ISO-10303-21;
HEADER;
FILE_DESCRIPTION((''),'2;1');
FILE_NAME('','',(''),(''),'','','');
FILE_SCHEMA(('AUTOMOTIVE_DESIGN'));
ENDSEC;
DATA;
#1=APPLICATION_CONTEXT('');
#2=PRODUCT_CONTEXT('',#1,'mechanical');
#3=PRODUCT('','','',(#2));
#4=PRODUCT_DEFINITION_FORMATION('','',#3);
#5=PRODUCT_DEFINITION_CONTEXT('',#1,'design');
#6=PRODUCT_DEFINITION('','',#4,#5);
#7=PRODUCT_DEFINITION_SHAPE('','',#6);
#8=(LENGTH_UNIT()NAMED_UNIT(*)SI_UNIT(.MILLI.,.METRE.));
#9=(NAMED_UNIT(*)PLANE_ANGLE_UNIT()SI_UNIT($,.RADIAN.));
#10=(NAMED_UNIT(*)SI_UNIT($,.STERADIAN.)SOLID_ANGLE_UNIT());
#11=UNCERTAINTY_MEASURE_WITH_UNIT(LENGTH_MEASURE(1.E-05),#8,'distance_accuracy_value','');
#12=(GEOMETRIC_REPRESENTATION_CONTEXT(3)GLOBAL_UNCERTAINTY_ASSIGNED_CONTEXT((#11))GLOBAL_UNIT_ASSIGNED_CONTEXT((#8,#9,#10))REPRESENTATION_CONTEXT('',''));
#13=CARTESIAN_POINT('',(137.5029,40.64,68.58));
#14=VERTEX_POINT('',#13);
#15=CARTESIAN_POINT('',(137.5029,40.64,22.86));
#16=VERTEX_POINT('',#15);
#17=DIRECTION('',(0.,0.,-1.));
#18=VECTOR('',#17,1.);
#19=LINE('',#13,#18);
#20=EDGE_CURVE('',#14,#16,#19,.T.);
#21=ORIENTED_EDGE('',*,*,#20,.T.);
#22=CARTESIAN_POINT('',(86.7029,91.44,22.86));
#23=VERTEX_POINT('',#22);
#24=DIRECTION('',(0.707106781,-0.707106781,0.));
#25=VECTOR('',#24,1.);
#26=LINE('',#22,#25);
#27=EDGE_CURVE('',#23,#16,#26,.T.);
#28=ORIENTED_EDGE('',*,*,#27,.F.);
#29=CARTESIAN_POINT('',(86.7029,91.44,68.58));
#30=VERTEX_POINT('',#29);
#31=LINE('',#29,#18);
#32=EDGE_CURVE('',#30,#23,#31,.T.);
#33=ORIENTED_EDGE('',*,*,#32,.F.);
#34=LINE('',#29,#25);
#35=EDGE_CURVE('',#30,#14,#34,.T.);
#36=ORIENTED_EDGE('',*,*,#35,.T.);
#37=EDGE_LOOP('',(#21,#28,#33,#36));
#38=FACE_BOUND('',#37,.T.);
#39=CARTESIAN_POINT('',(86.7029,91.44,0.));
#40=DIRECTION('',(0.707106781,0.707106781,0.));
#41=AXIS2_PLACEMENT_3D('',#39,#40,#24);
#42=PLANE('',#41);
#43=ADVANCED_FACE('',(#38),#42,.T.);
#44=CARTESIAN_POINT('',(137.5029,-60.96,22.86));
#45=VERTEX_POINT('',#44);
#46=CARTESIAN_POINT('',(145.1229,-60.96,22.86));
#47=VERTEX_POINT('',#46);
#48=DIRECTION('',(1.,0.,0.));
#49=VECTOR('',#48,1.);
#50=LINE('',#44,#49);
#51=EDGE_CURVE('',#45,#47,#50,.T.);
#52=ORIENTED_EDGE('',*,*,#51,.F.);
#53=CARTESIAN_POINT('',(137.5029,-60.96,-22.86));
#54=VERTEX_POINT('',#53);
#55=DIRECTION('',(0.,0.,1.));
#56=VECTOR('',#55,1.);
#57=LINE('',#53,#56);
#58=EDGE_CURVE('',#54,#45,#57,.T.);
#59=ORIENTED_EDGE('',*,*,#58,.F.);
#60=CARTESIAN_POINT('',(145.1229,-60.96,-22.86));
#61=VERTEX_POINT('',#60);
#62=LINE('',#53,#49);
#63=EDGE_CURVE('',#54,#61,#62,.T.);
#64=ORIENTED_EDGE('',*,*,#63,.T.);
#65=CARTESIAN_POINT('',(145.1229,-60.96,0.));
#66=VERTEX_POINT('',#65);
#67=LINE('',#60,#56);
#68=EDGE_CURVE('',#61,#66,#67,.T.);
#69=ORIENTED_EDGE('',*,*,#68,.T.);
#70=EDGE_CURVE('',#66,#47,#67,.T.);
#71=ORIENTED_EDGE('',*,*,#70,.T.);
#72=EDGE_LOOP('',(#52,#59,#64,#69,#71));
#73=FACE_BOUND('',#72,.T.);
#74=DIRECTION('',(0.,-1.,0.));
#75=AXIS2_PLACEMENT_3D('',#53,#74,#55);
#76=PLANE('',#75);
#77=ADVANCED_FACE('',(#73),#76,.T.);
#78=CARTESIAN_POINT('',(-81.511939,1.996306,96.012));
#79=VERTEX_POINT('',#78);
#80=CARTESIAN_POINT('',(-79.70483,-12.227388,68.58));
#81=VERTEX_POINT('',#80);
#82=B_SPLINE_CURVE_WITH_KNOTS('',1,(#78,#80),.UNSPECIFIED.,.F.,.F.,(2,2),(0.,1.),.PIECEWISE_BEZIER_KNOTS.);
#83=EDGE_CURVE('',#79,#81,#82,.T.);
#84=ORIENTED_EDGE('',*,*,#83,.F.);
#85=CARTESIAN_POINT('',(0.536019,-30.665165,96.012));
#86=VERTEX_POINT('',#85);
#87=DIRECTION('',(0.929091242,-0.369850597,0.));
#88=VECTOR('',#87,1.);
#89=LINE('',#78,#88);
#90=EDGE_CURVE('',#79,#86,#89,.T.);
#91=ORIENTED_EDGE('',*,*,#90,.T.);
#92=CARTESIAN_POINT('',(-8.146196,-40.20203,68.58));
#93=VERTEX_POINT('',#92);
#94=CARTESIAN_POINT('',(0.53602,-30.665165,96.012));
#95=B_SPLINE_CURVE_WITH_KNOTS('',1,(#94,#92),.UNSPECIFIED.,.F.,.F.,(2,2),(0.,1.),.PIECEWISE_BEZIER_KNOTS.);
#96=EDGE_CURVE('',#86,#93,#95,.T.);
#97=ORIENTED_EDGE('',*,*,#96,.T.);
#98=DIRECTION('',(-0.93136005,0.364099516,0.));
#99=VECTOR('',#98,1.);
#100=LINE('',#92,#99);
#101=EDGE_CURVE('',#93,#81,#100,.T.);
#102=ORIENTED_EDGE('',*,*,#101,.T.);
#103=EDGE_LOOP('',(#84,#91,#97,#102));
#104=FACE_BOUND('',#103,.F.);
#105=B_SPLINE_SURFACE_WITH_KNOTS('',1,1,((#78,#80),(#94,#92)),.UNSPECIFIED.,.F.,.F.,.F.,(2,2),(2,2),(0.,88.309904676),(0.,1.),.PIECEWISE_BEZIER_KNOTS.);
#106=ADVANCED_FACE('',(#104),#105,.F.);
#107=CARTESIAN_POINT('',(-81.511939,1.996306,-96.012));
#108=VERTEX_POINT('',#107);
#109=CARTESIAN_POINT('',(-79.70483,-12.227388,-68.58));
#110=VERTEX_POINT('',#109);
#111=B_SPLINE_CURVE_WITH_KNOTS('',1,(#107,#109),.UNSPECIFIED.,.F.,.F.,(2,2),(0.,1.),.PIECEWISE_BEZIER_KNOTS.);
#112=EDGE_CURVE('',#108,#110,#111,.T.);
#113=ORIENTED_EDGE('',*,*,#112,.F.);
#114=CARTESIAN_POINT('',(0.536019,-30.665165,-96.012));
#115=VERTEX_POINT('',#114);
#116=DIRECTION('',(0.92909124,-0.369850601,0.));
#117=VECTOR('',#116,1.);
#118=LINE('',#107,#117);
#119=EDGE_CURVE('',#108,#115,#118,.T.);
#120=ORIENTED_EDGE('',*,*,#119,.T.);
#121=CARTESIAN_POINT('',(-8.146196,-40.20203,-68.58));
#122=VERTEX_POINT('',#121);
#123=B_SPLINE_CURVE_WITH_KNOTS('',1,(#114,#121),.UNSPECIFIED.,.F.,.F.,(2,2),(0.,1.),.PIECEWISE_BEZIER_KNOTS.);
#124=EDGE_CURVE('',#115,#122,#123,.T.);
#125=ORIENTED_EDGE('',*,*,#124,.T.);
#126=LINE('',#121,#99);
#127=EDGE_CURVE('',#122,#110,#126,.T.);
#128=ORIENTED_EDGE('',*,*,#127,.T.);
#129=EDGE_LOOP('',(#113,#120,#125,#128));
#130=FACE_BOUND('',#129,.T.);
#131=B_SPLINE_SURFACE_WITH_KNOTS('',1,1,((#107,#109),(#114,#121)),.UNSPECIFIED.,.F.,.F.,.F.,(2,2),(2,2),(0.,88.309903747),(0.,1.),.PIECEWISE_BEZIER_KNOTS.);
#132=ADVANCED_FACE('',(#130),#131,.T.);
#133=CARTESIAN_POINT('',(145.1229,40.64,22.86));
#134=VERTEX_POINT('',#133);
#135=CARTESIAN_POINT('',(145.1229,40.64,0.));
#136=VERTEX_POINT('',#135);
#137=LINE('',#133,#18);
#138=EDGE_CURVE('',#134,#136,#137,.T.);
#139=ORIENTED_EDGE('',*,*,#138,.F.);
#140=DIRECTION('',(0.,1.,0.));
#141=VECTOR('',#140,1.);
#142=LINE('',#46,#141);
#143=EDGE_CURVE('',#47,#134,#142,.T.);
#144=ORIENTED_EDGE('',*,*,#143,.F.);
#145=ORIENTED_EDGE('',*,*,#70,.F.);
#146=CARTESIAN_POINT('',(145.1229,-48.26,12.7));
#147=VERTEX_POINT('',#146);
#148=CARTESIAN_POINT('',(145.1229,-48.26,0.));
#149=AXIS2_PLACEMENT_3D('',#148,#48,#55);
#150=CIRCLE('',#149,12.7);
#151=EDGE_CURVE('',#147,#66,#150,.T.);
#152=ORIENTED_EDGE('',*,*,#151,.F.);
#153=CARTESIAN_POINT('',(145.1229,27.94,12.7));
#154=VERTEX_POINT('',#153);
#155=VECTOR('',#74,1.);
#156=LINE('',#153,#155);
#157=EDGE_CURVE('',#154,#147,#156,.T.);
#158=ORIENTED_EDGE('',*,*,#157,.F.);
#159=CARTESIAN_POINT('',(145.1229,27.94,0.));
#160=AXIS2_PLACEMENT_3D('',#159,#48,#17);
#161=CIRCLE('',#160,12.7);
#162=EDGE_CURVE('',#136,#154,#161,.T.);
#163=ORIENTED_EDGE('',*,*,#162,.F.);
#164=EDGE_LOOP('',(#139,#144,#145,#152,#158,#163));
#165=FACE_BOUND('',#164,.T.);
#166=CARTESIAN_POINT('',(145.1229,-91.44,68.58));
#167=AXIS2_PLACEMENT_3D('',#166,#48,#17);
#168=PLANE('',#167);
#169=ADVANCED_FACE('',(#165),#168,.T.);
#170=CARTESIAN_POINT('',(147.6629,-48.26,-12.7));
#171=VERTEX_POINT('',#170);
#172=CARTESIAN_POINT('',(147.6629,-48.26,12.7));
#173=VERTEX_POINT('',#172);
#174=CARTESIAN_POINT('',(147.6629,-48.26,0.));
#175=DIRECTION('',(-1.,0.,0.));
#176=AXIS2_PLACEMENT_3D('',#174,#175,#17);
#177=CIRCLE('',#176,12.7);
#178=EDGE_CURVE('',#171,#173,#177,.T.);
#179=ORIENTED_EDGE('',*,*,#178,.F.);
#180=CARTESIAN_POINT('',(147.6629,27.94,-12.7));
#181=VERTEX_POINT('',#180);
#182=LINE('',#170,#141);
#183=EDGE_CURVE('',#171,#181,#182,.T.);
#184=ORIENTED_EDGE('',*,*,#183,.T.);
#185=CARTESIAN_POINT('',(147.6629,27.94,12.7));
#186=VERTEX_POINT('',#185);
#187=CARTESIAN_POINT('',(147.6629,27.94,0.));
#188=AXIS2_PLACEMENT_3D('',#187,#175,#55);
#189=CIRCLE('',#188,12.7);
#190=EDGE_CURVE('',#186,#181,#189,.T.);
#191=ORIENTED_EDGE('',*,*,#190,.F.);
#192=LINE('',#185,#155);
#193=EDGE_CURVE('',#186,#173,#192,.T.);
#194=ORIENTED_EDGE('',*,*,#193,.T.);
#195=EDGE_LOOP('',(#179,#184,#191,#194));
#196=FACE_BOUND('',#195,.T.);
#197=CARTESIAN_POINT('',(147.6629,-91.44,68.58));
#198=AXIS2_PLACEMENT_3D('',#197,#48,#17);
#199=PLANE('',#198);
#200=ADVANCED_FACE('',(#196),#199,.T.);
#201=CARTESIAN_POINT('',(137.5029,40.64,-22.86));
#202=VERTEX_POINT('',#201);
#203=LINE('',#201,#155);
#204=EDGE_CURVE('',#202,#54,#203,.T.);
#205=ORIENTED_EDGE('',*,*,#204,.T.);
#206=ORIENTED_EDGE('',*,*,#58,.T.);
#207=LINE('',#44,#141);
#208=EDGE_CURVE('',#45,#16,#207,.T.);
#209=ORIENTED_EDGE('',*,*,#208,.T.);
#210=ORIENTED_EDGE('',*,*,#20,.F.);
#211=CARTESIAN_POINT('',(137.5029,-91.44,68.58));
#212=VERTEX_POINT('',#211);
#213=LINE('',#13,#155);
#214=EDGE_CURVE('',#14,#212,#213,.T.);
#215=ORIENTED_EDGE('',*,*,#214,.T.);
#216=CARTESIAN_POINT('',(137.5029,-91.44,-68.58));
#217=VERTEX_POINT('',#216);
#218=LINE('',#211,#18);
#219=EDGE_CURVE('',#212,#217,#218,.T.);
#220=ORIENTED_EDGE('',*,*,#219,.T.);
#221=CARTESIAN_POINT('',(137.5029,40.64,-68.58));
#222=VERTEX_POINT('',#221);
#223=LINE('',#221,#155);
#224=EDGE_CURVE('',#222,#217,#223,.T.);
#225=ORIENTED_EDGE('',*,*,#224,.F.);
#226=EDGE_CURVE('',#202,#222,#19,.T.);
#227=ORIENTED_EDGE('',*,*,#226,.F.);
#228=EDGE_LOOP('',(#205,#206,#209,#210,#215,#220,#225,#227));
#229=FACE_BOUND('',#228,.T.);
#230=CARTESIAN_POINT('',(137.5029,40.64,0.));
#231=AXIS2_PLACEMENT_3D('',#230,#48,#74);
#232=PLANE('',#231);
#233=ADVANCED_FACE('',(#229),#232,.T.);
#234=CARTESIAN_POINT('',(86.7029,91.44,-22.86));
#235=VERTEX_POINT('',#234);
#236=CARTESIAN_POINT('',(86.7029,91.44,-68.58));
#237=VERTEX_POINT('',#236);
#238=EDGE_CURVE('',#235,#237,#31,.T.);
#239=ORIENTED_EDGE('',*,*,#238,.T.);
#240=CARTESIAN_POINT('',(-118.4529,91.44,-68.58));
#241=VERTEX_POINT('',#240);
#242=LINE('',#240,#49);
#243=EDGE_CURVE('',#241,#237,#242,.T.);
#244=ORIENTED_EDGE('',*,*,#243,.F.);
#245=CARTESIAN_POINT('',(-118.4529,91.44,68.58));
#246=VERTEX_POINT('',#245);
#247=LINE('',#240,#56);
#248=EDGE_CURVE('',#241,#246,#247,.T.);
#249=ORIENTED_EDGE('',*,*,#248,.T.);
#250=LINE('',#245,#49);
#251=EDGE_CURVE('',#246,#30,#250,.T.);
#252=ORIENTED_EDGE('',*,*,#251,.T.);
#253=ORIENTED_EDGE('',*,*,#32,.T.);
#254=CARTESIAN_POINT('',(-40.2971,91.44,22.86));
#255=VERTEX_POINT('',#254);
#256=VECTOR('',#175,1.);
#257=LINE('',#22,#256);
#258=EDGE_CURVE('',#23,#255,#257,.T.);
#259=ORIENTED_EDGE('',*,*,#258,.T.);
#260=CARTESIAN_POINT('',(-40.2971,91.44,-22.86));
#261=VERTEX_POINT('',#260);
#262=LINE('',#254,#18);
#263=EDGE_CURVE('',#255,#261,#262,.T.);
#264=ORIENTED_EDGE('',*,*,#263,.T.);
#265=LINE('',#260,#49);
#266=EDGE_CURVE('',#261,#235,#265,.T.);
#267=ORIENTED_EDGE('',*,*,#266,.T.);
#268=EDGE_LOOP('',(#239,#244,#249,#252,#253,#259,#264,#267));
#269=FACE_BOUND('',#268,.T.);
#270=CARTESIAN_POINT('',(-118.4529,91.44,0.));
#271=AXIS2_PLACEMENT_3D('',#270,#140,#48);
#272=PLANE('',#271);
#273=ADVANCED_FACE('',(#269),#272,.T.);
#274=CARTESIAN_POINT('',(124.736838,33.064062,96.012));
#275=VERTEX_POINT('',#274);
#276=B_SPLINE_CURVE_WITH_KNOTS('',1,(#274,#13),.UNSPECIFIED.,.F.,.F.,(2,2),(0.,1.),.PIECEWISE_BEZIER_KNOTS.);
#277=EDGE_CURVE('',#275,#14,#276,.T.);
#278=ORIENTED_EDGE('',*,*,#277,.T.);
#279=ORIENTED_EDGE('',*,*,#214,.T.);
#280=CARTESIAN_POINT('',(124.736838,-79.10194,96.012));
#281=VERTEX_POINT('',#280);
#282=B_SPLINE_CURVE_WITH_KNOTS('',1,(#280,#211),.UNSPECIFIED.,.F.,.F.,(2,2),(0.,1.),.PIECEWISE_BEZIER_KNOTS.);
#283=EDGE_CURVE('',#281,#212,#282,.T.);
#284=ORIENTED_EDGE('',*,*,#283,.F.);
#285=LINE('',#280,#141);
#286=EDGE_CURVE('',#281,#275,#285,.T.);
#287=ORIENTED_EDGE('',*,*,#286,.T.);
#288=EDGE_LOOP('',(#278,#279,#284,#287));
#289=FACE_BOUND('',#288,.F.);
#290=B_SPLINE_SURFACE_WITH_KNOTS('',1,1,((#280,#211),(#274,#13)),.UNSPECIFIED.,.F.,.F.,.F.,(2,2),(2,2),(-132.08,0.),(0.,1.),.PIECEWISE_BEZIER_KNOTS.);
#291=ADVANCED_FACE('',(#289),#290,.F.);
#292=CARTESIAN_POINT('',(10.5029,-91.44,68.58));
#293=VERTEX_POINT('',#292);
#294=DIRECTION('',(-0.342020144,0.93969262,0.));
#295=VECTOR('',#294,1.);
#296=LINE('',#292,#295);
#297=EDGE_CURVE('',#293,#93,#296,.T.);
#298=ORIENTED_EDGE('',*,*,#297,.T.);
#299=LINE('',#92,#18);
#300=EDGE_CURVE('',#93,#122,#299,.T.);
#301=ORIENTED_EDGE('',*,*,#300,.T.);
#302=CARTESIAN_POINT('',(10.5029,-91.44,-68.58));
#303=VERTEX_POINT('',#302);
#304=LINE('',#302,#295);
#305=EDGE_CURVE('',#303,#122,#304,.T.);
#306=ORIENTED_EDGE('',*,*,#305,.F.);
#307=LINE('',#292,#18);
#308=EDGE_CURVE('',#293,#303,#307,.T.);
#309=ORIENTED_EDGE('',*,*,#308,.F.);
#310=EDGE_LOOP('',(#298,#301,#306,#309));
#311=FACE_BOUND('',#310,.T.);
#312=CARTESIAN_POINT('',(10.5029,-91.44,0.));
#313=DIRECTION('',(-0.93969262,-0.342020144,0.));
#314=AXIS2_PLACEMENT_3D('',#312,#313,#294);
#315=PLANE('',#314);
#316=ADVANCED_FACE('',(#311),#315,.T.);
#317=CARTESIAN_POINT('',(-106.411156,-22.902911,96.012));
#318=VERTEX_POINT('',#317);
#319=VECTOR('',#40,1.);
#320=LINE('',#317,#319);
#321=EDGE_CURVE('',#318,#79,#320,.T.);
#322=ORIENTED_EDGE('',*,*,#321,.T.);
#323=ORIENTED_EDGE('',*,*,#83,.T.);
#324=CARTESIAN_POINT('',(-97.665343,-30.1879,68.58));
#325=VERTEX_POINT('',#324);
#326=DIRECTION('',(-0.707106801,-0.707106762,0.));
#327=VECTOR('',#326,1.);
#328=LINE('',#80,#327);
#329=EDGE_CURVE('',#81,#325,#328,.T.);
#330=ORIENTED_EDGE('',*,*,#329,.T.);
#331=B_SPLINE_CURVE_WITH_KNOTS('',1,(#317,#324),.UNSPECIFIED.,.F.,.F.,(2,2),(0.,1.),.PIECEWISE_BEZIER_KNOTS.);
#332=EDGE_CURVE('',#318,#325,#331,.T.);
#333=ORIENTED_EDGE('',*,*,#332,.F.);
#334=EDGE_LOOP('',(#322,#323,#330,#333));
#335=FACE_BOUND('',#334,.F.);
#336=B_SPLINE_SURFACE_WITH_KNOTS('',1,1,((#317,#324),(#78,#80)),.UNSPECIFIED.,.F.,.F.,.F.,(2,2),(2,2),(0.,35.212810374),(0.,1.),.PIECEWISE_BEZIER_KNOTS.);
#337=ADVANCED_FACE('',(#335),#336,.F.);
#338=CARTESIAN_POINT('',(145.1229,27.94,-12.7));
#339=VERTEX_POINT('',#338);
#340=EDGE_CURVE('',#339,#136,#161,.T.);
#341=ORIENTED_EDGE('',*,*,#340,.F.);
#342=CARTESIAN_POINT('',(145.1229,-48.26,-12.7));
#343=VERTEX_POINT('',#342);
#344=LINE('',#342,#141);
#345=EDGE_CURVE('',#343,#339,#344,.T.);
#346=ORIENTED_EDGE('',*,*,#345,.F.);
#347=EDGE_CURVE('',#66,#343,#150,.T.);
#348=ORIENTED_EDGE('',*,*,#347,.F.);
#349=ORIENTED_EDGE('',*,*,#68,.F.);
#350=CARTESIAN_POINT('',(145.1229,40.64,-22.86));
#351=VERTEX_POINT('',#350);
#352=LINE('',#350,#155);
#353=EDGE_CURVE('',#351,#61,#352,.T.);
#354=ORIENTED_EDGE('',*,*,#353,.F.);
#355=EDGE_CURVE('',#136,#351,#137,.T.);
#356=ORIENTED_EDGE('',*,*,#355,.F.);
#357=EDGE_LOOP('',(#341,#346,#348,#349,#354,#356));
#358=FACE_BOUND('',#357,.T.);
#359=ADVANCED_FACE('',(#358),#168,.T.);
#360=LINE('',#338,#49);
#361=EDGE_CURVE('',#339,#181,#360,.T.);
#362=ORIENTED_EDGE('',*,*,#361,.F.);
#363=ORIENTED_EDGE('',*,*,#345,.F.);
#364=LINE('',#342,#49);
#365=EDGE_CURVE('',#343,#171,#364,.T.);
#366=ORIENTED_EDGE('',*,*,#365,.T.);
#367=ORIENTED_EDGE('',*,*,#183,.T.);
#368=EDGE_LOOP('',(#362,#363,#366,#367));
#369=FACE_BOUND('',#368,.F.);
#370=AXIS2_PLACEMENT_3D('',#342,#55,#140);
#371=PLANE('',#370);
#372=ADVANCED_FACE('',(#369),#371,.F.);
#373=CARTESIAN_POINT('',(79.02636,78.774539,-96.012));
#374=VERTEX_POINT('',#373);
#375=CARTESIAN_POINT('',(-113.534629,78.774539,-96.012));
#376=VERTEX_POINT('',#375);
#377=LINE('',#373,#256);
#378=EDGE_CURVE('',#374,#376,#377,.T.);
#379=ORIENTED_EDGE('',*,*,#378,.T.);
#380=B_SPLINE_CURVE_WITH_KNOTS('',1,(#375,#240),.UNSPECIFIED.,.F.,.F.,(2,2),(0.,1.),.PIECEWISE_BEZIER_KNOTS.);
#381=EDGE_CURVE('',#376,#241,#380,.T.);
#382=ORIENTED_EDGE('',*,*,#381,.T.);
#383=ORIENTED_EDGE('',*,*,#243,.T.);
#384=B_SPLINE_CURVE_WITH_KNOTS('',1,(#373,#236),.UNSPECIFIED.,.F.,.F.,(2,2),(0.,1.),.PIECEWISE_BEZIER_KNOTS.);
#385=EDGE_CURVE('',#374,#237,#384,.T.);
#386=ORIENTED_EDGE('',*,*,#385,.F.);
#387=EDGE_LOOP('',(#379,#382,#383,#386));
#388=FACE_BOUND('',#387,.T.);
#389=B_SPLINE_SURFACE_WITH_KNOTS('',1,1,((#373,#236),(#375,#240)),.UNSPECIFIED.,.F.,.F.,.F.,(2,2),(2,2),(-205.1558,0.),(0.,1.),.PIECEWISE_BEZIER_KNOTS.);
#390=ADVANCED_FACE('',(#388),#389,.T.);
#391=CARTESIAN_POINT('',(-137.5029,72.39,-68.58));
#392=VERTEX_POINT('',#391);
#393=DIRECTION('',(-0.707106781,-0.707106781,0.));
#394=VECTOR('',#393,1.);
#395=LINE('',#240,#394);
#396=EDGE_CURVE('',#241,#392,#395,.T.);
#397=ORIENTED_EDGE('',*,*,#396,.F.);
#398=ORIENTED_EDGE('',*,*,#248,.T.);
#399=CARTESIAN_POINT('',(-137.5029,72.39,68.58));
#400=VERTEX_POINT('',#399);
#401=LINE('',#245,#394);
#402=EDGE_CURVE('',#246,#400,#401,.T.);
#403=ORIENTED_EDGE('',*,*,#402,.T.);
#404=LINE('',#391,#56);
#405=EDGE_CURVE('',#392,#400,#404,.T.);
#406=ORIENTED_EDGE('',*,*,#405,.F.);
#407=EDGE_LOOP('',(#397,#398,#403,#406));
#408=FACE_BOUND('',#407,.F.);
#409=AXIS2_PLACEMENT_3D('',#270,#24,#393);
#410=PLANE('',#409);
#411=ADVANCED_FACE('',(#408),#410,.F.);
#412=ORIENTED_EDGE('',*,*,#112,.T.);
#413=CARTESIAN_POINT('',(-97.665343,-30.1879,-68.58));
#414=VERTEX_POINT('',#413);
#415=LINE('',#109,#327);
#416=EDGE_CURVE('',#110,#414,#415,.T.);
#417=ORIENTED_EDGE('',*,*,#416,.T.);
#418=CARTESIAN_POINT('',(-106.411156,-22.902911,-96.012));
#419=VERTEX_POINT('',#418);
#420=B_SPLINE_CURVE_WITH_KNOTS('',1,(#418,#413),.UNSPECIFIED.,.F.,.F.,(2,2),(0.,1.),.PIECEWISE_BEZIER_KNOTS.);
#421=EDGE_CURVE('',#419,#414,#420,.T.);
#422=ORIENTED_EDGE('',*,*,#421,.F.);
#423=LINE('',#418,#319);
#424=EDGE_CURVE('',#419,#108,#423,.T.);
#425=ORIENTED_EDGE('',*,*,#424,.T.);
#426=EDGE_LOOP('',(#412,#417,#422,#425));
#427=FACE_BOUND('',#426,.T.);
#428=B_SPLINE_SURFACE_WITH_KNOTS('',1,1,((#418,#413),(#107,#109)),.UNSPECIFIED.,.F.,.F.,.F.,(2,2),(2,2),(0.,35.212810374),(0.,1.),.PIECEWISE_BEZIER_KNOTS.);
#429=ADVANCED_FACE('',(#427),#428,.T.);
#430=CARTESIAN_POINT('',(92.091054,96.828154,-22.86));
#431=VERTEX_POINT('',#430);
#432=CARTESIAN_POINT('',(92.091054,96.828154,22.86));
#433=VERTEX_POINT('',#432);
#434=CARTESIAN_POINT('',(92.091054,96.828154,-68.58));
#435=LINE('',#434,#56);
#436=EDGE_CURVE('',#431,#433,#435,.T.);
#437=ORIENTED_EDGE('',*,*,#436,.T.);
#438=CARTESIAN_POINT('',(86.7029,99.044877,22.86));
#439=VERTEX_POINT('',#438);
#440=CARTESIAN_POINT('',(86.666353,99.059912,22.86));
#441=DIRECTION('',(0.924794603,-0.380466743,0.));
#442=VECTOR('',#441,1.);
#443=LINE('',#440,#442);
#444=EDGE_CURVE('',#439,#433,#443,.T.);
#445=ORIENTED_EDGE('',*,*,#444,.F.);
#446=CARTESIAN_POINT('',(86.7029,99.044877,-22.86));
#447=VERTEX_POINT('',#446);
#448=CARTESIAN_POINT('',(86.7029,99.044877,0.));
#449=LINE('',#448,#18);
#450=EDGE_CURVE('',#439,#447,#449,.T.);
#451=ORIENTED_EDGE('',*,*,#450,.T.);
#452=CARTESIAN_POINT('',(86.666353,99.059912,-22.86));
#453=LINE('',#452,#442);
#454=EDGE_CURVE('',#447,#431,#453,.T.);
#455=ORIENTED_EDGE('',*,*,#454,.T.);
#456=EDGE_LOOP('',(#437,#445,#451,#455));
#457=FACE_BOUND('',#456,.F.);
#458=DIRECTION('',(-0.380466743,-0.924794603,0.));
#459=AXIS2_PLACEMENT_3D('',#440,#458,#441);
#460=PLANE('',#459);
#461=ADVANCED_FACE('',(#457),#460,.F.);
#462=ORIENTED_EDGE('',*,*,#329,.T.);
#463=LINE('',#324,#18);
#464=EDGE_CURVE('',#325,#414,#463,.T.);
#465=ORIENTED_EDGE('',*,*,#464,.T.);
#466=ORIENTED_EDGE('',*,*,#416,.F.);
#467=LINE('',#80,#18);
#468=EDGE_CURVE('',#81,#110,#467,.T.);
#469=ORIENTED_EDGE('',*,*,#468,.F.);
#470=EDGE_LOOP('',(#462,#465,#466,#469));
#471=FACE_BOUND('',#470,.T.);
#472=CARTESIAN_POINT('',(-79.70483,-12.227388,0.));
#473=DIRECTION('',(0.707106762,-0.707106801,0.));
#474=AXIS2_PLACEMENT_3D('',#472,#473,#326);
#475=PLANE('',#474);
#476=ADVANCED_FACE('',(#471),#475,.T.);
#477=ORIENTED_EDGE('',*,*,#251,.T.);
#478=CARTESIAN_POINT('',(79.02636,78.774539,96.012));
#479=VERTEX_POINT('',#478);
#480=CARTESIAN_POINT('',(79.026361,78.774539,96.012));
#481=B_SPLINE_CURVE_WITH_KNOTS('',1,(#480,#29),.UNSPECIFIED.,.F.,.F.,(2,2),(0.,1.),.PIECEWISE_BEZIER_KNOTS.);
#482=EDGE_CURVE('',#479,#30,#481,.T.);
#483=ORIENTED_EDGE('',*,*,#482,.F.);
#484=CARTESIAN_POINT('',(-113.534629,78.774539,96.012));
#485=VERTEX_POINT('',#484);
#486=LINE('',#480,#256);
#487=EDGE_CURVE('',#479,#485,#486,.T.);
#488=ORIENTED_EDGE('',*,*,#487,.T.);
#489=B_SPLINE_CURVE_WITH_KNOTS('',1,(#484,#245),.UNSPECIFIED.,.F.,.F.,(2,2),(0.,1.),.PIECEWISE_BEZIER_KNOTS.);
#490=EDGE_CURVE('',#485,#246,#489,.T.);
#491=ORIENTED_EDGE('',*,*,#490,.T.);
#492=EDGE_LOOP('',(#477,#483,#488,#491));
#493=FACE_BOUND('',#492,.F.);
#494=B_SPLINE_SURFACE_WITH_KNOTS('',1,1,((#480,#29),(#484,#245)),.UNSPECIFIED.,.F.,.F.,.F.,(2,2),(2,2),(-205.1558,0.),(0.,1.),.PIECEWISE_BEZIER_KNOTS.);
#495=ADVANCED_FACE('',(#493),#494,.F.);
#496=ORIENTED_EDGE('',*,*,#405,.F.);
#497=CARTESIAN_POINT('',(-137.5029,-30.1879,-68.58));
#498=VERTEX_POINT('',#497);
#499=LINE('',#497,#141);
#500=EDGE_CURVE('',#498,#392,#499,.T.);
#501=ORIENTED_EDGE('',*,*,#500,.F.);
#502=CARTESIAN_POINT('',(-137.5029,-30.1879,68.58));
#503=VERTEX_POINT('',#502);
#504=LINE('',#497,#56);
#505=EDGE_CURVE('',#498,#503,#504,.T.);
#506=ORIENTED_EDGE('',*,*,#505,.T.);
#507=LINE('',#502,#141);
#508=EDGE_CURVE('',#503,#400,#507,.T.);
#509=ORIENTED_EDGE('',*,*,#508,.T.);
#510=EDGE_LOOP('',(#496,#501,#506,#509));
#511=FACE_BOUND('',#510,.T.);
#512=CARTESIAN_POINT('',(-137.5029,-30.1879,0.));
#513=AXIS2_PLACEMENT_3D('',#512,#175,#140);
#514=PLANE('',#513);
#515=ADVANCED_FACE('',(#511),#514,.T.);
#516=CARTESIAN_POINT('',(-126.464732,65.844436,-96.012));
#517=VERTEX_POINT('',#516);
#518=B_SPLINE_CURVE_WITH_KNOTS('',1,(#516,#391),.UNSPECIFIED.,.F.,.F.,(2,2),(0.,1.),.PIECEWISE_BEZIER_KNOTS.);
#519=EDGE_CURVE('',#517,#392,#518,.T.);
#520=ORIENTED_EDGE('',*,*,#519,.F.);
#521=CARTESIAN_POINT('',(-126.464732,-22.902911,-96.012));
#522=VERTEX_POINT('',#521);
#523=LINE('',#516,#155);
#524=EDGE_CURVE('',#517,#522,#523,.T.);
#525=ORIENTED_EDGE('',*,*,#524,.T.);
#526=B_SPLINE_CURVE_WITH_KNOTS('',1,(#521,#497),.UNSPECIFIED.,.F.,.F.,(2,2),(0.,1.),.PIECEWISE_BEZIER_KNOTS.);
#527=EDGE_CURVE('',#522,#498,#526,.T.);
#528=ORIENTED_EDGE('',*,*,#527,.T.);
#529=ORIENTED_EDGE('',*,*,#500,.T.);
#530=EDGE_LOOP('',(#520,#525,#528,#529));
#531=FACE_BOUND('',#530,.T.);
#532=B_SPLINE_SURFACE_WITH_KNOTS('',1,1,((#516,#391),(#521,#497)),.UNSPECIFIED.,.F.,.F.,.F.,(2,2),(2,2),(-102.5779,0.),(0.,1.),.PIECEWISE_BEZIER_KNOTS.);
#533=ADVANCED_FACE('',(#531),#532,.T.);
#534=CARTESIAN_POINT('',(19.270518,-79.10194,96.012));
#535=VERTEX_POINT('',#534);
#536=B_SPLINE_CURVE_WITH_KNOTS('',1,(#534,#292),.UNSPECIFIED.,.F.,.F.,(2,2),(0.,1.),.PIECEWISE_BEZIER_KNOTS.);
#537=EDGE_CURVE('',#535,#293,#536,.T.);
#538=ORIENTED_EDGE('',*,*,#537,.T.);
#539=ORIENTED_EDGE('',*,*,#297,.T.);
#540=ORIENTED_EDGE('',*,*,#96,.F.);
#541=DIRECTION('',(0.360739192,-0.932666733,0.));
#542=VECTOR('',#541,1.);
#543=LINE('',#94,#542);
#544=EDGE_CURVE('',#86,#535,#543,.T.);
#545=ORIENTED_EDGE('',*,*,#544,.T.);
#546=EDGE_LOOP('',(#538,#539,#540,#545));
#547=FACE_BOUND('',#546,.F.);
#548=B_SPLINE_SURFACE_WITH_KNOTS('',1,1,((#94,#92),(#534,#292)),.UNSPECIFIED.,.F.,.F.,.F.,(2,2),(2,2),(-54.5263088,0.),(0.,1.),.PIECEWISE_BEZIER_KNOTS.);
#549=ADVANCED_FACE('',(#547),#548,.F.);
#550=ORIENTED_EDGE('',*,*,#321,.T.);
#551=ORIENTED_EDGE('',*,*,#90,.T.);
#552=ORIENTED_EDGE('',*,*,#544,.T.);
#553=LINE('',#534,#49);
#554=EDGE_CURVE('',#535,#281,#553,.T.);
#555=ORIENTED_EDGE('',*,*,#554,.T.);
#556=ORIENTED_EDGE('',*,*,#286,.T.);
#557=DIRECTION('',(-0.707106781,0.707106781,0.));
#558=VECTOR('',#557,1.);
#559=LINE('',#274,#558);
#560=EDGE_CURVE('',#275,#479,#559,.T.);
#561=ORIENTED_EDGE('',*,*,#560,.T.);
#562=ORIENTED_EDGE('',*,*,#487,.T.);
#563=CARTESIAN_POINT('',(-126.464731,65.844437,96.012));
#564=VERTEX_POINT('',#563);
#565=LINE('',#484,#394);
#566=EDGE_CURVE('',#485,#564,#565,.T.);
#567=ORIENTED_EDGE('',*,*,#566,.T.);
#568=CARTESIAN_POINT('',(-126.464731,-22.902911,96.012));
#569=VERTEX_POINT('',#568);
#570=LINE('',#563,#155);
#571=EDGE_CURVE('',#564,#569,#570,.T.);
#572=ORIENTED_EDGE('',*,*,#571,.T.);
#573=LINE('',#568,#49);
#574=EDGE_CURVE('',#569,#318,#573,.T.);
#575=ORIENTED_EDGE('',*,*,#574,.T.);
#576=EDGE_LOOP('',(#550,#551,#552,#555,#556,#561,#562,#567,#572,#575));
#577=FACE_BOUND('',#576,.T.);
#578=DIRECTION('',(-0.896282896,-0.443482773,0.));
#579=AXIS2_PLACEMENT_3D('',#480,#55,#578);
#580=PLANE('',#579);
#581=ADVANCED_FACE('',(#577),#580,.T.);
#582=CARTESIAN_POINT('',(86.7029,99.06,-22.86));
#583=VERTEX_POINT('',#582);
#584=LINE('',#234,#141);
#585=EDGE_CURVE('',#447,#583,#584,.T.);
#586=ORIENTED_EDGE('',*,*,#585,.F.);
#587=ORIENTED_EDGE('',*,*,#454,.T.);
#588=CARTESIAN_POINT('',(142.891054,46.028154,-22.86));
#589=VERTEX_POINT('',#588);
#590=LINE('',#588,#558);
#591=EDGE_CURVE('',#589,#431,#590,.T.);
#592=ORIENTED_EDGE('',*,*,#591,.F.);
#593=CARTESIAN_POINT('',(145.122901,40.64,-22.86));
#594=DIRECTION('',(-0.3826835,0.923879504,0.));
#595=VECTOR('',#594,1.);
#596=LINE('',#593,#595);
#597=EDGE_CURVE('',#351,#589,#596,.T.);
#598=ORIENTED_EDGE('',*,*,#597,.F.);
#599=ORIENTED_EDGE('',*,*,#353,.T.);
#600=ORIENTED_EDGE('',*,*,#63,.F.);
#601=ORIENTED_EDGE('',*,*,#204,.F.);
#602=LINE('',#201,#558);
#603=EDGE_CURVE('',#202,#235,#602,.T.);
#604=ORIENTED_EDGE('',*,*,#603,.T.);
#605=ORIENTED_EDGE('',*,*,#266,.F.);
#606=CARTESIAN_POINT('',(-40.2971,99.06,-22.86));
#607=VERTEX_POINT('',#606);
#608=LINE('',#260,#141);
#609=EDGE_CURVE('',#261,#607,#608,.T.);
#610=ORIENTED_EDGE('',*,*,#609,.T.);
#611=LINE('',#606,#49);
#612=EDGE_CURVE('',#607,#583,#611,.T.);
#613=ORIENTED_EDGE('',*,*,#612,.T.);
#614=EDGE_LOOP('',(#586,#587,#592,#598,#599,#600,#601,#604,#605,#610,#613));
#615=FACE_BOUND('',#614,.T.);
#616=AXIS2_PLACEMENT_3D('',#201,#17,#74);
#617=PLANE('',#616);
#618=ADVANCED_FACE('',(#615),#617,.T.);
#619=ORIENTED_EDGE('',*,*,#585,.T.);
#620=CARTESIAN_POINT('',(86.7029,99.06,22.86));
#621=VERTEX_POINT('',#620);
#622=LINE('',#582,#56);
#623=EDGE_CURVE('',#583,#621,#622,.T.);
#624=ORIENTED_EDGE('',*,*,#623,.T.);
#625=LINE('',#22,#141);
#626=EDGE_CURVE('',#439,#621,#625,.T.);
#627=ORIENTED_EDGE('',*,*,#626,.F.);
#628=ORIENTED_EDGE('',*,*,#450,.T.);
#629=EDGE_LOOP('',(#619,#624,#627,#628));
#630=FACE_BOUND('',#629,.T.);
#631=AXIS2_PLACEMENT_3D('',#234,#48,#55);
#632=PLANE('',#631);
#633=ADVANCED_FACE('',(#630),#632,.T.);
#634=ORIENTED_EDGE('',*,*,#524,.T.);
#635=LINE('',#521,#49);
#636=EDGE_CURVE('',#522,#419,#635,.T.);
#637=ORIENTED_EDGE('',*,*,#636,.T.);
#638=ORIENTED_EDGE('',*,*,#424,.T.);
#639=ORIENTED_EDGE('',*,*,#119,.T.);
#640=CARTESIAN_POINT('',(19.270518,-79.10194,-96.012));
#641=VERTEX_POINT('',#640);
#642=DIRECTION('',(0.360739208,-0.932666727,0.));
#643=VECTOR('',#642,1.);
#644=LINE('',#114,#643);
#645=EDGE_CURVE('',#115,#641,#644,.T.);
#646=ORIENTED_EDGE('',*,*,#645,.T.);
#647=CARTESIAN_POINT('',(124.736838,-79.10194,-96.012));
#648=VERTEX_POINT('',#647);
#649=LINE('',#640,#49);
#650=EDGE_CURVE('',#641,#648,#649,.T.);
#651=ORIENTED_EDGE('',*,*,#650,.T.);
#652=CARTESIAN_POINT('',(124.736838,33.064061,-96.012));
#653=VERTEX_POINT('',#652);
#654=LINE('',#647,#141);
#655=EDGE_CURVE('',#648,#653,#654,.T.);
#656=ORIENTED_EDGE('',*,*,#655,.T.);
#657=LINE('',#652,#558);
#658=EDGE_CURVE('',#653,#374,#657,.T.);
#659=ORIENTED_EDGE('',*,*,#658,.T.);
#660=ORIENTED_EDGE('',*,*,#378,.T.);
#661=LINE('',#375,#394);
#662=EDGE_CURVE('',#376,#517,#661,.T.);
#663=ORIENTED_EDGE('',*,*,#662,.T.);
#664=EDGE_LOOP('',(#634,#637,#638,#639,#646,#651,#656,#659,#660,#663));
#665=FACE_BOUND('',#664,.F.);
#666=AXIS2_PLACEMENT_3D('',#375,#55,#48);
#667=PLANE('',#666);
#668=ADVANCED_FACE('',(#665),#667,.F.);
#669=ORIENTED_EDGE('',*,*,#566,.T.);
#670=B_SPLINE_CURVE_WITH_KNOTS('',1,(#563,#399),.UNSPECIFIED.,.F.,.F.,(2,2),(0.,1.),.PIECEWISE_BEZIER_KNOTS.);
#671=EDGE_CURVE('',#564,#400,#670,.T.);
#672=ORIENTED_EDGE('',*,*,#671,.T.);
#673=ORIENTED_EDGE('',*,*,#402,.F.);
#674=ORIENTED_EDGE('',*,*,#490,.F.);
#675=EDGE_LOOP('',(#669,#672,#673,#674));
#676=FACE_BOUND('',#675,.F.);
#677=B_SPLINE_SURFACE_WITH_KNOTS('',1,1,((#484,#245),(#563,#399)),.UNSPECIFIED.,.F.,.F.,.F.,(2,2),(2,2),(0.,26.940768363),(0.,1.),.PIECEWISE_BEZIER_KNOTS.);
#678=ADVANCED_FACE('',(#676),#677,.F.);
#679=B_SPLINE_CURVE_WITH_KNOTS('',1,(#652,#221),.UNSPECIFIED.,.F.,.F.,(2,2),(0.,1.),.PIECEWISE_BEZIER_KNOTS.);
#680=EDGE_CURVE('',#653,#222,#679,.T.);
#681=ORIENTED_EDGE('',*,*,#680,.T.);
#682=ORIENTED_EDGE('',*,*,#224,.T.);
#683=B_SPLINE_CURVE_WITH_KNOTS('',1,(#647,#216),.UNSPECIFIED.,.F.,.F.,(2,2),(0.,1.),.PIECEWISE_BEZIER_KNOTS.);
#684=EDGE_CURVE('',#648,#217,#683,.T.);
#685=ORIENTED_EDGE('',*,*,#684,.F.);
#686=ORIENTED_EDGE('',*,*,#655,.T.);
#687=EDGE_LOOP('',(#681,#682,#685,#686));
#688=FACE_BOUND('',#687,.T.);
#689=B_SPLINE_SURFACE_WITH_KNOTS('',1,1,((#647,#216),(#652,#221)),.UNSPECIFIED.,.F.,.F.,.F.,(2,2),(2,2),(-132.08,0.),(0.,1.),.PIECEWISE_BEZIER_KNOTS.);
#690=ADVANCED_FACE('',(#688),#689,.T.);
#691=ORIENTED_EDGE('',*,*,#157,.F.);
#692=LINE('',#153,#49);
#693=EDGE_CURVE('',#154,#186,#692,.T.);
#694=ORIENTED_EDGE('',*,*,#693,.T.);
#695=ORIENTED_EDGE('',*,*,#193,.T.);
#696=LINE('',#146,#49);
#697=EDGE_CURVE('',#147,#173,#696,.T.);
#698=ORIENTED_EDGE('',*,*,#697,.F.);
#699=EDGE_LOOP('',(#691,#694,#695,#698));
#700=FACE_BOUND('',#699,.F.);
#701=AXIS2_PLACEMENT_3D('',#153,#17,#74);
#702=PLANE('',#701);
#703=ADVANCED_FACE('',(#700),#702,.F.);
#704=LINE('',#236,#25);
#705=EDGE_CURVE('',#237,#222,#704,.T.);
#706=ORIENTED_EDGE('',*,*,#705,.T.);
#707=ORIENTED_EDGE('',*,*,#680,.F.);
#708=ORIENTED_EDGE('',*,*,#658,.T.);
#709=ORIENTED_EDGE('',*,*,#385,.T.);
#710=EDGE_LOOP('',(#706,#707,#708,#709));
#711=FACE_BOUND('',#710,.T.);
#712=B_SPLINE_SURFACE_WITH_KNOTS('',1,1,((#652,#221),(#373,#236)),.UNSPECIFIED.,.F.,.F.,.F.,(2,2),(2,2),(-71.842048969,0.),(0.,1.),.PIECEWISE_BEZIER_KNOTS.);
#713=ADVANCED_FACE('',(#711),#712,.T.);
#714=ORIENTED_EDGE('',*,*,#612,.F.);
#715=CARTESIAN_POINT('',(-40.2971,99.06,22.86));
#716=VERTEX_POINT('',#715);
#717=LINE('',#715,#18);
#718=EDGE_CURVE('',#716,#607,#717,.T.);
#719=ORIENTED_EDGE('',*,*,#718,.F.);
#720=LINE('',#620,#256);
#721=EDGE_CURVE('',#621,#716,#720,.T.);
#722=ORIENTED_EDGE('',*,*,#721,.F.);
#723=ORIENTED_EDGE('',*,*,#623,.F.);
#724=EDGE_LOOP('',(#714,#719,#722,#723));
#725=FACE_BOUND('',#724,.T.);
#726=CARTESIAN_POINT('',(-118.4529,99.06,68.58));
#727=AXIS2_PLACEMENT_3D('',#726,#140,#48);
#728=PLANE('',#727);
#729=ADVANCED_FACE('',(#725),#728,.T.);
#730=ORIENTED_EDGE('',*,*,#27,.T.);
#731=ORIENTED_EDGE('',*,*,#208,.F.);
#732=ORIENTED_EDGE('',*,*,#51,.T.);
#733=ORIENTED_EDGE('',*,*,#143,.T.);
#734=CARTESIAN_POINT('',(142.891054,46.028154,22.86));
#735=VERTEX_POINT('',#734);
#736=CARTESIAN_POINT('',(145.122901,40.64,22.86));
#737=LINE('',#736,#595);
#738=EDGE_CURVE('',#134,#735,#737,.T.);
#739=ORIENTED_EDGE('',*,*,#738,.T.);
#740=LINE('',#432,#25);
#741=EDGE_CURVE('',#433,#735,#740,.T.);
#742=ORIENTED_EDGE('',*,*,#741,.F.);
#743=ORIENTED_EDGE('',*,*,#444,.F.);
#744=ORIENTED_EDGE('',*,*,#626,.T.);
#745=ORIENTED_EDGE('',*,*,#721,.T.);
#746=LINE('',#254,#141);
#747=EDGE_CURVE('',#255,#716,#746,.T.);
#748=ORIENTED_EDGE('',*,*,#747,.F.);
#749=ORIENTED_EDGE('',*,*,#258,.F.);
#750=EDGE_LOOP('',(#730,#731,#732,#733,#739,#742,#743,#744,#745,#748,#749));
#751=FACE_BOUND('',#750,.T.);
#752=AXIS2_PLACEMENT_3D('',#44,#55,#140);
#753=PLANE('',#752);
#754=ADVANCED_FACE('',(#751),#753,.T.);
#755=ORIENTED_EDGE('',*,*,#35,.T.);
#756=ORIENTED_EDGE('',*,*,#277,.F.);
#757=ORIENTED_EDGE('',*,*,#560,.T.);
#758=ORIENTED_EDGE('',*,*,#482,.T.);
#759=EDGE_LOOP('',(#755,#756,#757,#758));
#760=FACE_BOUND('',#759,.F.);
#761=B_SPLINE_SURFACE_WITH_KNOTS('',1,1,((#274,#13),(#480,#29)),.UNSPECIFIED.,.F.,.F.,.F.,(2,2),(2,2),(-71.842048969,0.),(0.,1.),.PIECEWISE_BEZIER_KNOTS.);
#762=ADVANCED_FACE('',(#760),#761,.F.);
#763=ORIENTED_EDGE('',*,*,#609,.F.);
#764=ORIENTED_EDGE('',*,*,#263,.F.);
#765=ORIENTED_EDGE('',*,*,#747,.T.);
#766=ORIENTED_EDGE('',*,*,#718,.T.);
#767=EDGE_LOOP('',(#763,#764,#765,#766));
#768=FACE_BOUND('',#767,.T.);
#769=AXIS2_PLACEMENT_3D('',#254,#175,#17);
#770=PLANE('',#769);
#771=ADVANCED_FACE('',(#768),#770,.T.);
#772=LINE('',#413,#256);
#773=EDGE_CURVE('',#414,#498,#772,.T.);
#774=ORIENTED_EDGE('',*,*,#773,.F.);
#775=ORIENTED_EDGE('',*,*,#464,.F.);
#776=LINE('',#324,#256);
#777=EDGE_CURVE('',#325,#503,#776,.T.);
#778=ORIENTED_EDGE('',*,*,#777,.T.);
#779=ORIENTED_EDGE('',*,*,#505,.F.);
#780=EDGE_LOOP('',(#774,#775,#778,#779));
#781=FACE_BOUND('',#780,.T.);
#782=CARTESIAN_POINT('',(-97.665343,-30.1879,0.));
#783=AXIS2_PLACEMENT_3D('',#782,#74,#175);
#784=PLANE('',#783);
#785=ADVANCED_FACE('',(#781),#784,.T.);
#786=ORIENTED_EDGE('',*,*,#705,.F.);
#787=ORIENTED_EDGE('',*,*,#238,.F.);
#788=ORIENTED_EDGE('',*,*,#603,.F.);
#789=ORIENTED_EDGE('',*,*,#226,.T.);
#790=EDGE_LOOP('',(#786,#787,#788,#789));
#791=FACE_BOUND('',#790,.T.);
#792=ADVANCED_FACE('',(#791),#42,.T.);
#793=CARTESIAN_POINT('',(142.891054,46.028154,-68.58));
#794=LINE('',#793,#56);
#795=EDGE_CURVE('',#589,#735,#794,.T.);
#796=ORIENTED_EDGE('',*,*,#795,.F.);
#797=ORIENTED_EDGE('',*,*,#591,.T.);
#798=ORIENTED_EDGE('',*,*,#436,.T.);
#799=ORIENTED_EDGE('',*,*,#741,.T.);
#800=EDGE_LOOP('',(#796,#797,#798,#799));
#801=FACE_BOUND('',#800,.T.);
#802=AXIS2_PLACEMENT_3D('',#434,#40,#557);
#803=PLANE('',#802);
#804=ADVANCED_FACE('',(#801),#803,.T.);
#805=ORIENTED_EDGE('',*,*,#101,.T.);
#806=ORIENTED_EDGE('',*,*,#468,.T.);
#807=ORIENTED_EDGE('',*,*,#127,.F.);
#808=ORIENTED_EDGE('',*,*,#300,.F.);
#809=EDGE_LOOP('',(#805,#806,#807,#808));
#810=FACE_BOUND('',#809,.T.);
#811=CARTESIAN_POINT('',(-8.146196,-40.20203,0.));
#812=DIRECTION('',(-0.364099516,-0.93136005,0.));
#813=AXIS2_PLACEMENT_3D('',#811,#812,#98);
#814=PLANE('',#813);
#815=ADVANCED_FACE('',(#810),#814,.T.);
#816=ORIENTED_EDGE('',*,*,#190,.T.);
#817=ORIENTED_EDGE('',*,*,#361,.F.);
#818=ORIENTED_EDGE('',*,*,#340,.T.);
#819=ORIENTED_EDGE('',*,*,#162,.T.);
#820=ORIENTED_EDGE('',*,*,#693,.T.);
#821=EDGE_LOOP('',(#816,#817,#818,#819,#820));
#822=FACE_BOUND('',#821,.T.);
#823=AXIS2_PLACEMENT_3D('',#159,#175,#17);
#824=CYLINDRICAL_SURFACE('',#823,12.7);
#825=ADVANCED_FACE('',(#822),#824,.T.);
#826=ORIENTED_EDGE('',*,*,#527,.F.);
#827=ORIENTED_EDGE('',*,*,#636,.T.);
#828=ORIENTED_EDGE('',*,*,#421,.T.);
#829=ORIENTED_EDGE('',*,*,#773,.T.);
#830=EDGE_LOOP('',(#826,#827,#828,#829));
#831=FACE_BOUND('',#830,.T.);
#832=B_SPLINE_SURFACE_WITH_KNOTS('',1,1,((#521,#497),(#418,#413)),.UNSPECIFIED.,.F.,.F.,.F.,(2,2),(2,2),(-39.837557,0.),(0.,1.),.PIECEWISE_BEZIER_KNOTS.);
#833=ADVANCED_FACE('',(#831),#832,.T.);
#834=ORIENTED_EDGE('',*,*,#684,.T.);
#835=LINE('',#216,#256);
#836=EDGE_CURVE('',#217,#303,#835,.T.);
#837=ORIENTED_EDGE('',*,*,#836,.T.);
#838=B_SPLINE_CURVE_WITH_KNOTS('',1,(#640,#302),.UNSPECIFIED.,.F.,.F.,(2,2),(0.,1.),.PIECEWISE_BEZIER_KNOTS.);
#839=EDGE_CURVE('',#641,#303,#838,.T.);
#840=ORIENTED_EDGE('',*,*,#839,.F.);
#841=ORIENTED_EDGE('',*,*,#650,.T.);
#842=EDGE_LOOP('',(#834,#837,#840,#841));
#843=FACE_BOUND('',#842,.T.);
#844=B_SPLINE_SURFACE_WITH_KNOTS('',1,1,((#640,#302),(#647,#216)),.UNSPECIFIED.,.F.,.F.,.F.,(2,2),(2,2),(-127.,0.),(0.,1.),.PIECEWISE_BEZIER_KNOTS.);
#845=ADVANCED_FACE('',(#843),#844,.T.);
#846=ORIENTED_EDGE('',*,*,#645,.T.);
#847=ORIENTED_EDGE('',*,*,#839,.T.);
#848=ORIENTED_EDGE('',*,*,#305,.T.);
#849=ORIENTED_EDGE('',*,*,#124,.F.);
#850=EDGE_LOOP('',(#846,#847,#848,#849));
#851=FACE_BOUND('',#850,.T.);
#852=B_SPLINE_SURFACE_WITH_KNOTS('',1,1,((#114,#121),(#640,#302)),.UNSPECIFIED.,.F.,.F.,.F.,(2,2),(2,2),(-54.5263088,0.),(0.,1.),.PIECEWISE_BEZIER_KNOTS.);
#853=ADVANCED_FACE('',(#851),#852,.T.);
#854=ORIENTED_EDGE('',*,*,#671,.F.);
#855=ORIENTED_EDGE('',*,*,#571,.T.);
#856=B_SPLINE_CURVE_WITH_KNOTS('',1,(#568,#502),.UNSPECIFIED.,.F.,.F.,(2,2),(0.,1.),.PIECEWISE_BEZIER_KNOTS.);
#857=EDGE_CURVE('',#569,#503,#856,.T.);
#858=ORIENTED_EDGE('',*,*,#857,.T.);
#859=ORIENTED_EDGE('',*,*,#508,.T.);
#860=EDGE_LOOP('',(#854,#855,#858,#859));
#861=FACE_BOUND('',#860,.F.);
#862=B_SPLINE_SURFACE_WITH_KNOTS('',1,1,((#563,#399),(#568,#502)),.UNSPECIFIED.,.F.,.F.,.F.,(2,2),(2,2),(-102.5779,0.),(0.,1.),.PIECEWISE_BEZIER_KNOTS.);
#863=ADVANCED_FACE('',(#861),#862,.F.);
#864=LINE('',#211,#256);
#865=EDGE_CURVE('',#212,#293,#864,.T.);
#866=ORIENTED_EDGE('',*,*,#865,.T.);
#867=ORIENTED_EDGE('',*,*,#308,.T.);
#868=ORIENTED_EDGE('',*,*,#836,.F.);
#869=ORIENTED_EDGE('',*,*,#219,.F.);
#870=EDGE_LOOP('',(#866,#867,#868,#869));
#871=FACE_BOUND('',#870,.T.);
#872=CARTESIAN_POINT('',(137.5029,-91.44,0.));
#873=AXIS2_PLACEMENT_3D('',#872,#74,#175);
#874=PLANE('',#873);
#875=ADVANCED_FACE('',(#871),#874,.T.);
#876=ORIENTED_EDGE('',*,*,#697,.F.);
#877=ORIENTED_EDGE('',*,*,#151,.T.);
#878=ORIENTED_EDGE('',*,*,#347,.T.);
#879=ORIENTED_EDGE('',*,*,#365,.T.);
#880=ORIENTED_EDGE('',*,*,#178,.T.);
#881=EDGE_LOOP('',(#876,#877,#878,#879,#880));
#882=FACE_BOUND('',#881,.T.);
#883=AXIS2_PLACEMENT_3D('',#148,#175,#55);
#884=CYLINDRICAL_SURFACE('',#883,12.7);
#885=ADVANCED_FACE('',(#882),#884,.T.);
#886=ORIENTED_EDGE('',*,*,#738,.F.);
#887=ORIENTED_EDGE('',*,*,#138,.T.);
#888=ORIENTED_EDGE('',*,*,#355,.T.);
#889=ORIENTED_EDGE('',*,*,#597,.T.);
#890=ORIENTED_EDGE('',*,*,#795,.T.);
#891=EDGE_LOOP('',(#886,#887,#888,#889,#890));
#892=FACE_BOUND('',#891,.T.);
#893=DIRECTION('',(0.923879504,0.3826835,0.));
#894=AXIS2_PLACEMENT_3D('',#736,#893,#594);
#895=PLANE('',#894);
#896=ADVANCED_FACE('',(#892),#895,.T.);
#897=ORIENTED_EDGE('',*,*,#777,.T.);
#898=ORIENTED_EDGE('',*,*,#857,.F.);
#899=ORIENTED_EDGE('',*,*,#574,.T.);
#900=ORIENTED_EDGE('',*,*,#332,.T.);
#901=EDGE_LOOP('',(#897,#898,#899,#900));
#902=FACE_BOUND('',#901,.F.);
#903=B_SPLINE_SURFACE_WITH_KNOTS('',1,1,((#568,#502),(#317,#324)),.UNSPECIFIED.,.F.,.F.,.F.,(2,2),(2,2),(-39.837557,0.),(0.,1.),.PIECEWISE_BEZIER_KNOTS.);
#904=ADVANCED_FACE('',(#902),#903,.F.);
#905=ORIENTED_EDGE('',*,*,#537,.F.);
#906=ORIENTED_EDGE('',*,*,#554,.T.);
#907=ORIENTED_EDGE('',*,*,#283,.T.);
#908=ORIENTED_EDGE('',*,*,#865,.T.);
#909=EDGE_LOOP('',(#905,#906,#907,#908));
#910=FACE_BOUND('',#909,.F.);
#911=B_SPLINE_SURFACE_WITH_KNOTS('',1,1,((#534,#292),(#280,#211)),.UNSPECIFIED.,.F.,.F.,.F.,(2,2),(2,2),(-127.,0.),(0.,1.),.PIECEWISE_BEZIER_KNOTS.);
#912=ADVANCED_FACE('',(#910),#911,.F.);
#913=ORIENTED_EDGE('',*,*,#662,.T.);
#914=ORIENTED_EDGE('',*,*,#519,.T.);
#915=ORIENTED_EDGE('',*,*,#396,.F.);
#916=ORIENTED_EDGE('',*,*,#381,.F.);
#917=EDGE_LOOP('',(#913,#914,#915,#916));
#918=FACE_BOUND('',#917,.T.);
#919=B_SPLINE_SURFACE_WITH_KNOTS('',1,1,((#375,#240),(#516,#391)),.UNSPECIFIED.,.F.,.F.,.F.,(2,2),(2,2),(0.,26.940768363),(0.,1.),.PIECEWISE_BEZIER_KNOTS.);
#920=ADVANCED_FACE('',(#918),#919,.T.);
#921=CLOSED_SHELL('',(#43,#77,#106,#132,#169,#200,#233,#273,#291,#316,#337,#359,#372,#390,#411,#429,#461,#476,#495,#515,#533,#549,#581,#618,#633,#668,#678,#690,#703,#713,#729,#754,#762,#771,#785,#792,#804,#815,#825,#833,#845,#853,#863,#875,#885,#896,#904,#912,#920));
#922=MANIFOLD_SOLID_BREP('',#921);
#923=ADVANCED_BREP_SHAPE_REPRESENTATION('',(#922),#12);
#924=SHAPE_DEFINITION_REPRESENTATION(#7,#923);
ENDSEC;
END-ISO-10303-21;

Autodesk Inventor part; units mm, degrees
ref_plane "YZ Plane" through (0, 0, 0) normal (1, 0, 0) x (0, 1, 0)
sketch "Sketch1" plane through (0, 0, 0) normal (0, 0, 1) x (1, 0, 0)
  line L0 (-118.4529, 91.44) -> (86.7029, 91.44)
  line L1 (137.5029, 40.64) -> (137.5029, -91.44)
  line L2 (137.5029, -91.44) -> (10.5029, -91.44)
  line L3 (-137.5029, -30.1879) -> (-137.5029, 72.39)
  line L4 (-137.5029, 72.39) -> (-137.5029, -30.1879)
  line L5 (86.7029, 91.44) -> (137.5029, 40.64)
  line L6 (-118.4529, 91.44) -> (-137.5029, 72.39)
  line L7 (137.5029, -91.44) -> (10.5029, -91.44)
  line L8 (10.5029, -91.44) -> (-8.146196, -40.20203)
  line L9 (10.5029, -91.44) -> (65.029209, -91.44) construction
  line L10 (-8.146196, -40.20203) -> (-79.70483, -12.227388)
  line L11 (-79.70483, -12.227388) -> (-97.665343, -30.1879)
  line L12 (-97.665343, -30.1879) -> (-137.5029, -30.1879)
extrude "Extrusion1" add sketch "Sketch1" along normal mid plane 137.16
sketch "Sketch2" plane through (0, 0, -68.58) normal (0, 0, -1) x (-1, 0, 0)
  line L0 (-137.5029, 40.64) -> (-137.5029, -91.44)
  line L1 (-137.5029, -91.44) -> (-10.5029, -91.44)
  line L2 (-10.5029, -91.44) -> (8.146196, -40.20203)
  line L3 (8.146196, -40.20203) -> (79.70483, -12.227388)
  line L4 (79.70483, -12.227388) -> (97.665343, -30.1879)
  line L5 (97.665343, -30.1879) -> (137.5029, -30.1879)
  line L6 (137.5029, -30.1879) -> (137.5029, 72.39)
  line L7 (137.5029, 72.39) -> (118.4529, 91.44)
  line L8 (118.4529, 91.44) -> (-86.7029, 91.44)
  line L9 (-86.7029, 91.44) -> (-137.5029, 40.64)
  point P0 (0, 0)
sketch "Sketch3" plane through (0, 0, 68.58) normal (0, 0, 1) x (1, 0, 0)
  line L0 (137.5029, -91.44) -> (137.5029, 40.64)
  line L1 (137.5029, 40.64) -> (86.7029, 91.44)
  line L2 (86.7029, 91.44) -> (-118.4529, 91.44)
  line L3 (-118.4529, 91.44) -> (-137.5029, 72.39)
  line L4 (-137.5029, 72.39) -> (-137.5029, -30.1879)
  line L5 (-137.5029, -30.1879) -> (-97.665343, -30.1879)
  line L6 (-97.665343, -30.1879) -> (-79.70483, -12.227388)
  line L7 (-79.70483, -12.227388) -> (-8.146196, -40.20203)
  line L8 (-8.146196, -40.20203) -> (10.5029, -91.44)
  line L9 (10.5029, -91.44) -> (137.5029, -91.44)
  point P0 (0, 0)
ref_plane "Work Plane1" through (0, 0, 96.012) normal (0, 0, 1) x (1, 0, 0)
ref_plane "Work Plane2" through (0, 0, -96.012) normal (0, 0, -1) x (-1, 0, 0)
sketch "Sketch4" plane through (0, 0, 96.012) normal (0, 0, 1) x (1, 0, 0)
  line L0 (-126.464731, 65.844437) -> (-126.464731, -22.902911)
  line L1 (-126.464731, -22.902911) -> (-106.411156, -22.902911)
  line L2 (-106.411156, -22.902911) -> (-89.052252, -5.544007)
  line L3 (-106.411156, -22.902911) -> (-81.511939, 1.996306)
  line L4 (-81.511939, 1.996306) -> (0.53602, -30.665165)
  line L5 (0.53602, -30.665165) -> (19.270518, -79.10194)
  line L6 (19.270518, -79.10194) -> (124.736838, -79.10194)
  line L7 (124.736838, -79.10194) -> (124.736838, 33.064062)
  line L8 (124.736838, 33.064062) -> (79.026361, 78.774539)
  line L9 (79.026361, 78.774539) -> (-113.534629, 78.774539)
  line L10 (-113.534629, 78.774539) -> (-126.464731, 65.844437)
  point P0 (0, 0)
sketch "Sketch4 outline for Loft1" plane through (0, 0, 96.012) normal (0, 0, 1) x (1, 0, 0)
  line L0 (-113.534629, 78.774539) -> (-126.464731, 65.844437)
  line L1 (79.026361, 78.774539) -> (-113.534629, 78.774539)
  line L2 (124.736838, 33.064062) -> (79.026361, 78.774539)
  line L3 (124.736838, -79.10194) -> (124.736838, 33.064062)
  line L4 (19.270518, -79.10194) -> (124.736838, -79.10194)
  line L5 (0.53602, -30.665165) -> (19.270518, -79.10194)
  line L6 (-81.511939, 1.996306) -> (0.53602, -30.665165)
  line L7 (-106.411156, -22.902911) -> (-81.511939, 1.996306)
  line L8 (-126.464731, -22.902911) -> (-106.411156, -22.902911)
  line L9 (-126.464731, 65.844437) -> (-126.464731, -22.902911)
loft "Loft1" add profiles "Sketch4 outline for Loft1" section 2 edges at (137.5029, -25.4, 68.58) (112.1029, 66.04, 68.58) (-15.875, 91.44, 68.58) (-127.9779, 81.915, 68.58) (-137.5029, 21.10105, 68.58) (-117.584121, -30.1879, 68.58) (-88.685086, -21.207644, 68.58) (-43.925513, -26.214709, 68.58) (1.178352, -65.821015, 68.58) (74.0029, -91.44, 68.58)
sketch "Sketch5" plane through (-113.534629, 78.774539, 96.012) normal (0, 0, 1) x (1, 0, 0)
  line L0 (-12.930103, -12.930103) -> (-12.930103, -101.67745)
  line L1 (-12.930103, -101.67745) -> (7.123473, -101.67745)
  line L2 (7.123473, -101.67745) -> (32.02269, -76.778233)
  line L3 (32.02269, -76.778233) -> (114.070648, -109.439704)
  line L4 (114.070648, -109.439704) -> (132.805147, -157.876479)
  line L5 (132.805147, -157.876479) -> (238.271467, -157.876479)
  line L6 (238.271467, -157.876479) -> (238.271467, -45.710478)
  line L7 (238.271467, -45.710478) -> (192.560989, 0)
  line L8 (192.560989, 0) -> (0, 0)
  line L9 (0, 0) -> (-12.930103, -12.930103)
  point P0 (113.534629, -78.774539)
extrude "Extrusion2" add sketch "Sketch5" against normal blind 192.024
loft "Loft2" add section 1 edges at (-126.464731, 21.470763, -96.012) (-119.99968, 72.309488, -96.012) (-17.254134, 78.774539, -96.012) (101.881599, 55.9193, -96.012) (124.736838, -23.018939, -96.012) (72.003678, -79.10194, -96.012) (9.903269, -54.883552, -96.012) (-40.487959, -14.33443, -96.012) (-93.961547, -10.453303, -96.012) (-116.437944, -22.902911, -96.012) section 2 edges at (137.5029, -25.4, -68.58) (74.0029, -91.44, -68.58) (1.178352, -65.821015, -68.58) (-43.925513, -26.214709, -68.58) (-88.685086, -21.207644, -68.58) (-117.584121, -30.1879, -68.58) (-137.5029, 21.10105, -68.58) (-127.9779, 81.915, -68.58) (-15.875, 91.44, -68.58) (112.1029, 66.04, -68.58)
sketch "Sketch6" plane through (86.7029, 91.44, -68.58) normal (0.7071068, 0.7071068, 0) x (-0.7071068, 0.7071068, 0)
  line L0 (0, 0) -> (0, 137.16)
  line L1 (-71.842049, 0) -> (-71.842049, 137.16)
  line L2 (0, 137.16) -> (0, 91.44)
  line L3 (-71.842049, 0) -> (-71.842049, 45.72)
  line L4 (-71.842049, 45.72) -> (0, 45.72)
  line L5 (0, 45.72) -> (0, 91.44)
  line L6 (0, 91.44) -> (-71.842049, 91.44)
  line L7 (-71.842049, 91.44) -> (-71.842049, 45.72)
  point P0 (-3.349636, 68.58)
  dimension "d44" = 45.72
  dimension "d45" = 45.72
extrude "Extrusion3" add sketch "Sketch6" along normal blind 7.62
sketch "Sketch7" plane through (-118.4529, 91.44, 68.58) normal (0, 1, 0) x (1, 0, 0)
  line L0 (0, 137.16) -> (0, 0) projected
  line L1 (0, 137.16) -> (0, 91.44)
  line L2 (205.1558, 0) -> (205.1558, 45.72)
  line L3 (205.1558, 45.72) -> (78.1558, 45.72)
  line L4 (78.1558, 45.72) -> (78.1558, 91.44)
  line L5 (78.1558, 91.44) -> (205.1558, 91.44)
  line L6 (205.1558, 91.44) -> (205.1558, 45.72)
  point P0 (118.4529, 68.58)
  dimension "d48" = 45.72
  dimension "d49" = 127
extrude "Extrusion4" add sketch "Sketch7" along normal blind 7.62
sketch "Sketch8" plane through (137.5029, -91.44, 68.58) normal (1, 0, 0) x (0, 0, -1)
  line L0 (45.72, 132.08) -> (91.44, 132.08)
  line L1 (91.44, 132.08) -> (91.44, 30.48)
  line L2 (91.44, 30.48) -> (45.72, 30.48)
  line L3 (45.72, 30.48) -> (45.72, 132.08)
  point P0 (68.58, 91.44)
  dimension "d52" = 101.6
extrude "Extrusion5" add sketch "Sketch8" along normal blind 7.62
sketch "Sketch9" plane through (92.091054, 96.828154, -22.86) normal (-0.7071068, 0.7071068, 0) x (-0.7071068, -0.7071068, 0)
  line L0 (7.62, 0) -> (7.62, 45.72) projected
  line L1 (7.62, 45.72) -> (0, 45.72) projected
  line L2 (0, 0) -> (0, 45.72) projected
  line L3 (7.62, 0) -> (0, 0) projected
  point P0 (133.586053, 22.86)
sketch "Sketch10" plane through (142.891054, 46.028154, 22.86) normal (0, 0, 1) x (0.7071068, 0.7071068, 0)
  line L0 (-7.62, 0) -> (-7.62, 71.842049)
  line L1 (-7.62, 0) -> (0, 0)
  line L2 (0, 71.842049) -> (0, 0)
  line L3 (-7.62, 71.842049) -> (0, 71.842049)
  line L4 (-7.62, 71.842049) -> (-2.257751, 77.255983)
  line L5 (-7.62, 0) -> (-2.231846, -5.388154)
  line L6 (-7.62, 0) -> (0, 0) construction
  line L7 (-2.231846, -5.388154) -> (0, 0)
  line L8 (-2.257751, 77.255983) -> (0, 71.842049)
  line L9 (0, 71.842049) -> (0, 0)
  point P0 (-133.586053, 68.492413)
  dimension "d55" = 7.62
  dimension "d56" = 7.62
  dimension "d57" = 45
extrude "Extrusion6" add sketch "Sketch10" against normal blind 45.72
sketch "Sketch11" plane through (145.1229, -91.44, 68.58) normal (1, 0, 0) x (0, 0, -1)
  line L0 (45.72, 30.48) -> (91.44, 30.48) projected
  line L1 (91.44, 132.08) -> (45.72, 132.08) projected
  line L2 (68.58, 132.08) -> (68.58, 30.48) construction
  line L3 (55.88, 119.38) -> (55.88, 43.18)
  line L4 (81.28, 43.18) -> (81.28, 119.38)
  arc A0 (81.28, 119.38) -> (55.88, 119.38) centre (68.58, 119.38) ccw
  arc A1 (55.88, 43.18) -> (81.28, 43.18) centre (68.58, 43.18) ccw
  point P0 (68.58, 91.44)
  point P1 (68.58, 81.28)
  dimension "d60" = 25.4
extrude "Extrusion7" add sketch "Sketch11" along normal blind 2.54
properties part number "Head"
